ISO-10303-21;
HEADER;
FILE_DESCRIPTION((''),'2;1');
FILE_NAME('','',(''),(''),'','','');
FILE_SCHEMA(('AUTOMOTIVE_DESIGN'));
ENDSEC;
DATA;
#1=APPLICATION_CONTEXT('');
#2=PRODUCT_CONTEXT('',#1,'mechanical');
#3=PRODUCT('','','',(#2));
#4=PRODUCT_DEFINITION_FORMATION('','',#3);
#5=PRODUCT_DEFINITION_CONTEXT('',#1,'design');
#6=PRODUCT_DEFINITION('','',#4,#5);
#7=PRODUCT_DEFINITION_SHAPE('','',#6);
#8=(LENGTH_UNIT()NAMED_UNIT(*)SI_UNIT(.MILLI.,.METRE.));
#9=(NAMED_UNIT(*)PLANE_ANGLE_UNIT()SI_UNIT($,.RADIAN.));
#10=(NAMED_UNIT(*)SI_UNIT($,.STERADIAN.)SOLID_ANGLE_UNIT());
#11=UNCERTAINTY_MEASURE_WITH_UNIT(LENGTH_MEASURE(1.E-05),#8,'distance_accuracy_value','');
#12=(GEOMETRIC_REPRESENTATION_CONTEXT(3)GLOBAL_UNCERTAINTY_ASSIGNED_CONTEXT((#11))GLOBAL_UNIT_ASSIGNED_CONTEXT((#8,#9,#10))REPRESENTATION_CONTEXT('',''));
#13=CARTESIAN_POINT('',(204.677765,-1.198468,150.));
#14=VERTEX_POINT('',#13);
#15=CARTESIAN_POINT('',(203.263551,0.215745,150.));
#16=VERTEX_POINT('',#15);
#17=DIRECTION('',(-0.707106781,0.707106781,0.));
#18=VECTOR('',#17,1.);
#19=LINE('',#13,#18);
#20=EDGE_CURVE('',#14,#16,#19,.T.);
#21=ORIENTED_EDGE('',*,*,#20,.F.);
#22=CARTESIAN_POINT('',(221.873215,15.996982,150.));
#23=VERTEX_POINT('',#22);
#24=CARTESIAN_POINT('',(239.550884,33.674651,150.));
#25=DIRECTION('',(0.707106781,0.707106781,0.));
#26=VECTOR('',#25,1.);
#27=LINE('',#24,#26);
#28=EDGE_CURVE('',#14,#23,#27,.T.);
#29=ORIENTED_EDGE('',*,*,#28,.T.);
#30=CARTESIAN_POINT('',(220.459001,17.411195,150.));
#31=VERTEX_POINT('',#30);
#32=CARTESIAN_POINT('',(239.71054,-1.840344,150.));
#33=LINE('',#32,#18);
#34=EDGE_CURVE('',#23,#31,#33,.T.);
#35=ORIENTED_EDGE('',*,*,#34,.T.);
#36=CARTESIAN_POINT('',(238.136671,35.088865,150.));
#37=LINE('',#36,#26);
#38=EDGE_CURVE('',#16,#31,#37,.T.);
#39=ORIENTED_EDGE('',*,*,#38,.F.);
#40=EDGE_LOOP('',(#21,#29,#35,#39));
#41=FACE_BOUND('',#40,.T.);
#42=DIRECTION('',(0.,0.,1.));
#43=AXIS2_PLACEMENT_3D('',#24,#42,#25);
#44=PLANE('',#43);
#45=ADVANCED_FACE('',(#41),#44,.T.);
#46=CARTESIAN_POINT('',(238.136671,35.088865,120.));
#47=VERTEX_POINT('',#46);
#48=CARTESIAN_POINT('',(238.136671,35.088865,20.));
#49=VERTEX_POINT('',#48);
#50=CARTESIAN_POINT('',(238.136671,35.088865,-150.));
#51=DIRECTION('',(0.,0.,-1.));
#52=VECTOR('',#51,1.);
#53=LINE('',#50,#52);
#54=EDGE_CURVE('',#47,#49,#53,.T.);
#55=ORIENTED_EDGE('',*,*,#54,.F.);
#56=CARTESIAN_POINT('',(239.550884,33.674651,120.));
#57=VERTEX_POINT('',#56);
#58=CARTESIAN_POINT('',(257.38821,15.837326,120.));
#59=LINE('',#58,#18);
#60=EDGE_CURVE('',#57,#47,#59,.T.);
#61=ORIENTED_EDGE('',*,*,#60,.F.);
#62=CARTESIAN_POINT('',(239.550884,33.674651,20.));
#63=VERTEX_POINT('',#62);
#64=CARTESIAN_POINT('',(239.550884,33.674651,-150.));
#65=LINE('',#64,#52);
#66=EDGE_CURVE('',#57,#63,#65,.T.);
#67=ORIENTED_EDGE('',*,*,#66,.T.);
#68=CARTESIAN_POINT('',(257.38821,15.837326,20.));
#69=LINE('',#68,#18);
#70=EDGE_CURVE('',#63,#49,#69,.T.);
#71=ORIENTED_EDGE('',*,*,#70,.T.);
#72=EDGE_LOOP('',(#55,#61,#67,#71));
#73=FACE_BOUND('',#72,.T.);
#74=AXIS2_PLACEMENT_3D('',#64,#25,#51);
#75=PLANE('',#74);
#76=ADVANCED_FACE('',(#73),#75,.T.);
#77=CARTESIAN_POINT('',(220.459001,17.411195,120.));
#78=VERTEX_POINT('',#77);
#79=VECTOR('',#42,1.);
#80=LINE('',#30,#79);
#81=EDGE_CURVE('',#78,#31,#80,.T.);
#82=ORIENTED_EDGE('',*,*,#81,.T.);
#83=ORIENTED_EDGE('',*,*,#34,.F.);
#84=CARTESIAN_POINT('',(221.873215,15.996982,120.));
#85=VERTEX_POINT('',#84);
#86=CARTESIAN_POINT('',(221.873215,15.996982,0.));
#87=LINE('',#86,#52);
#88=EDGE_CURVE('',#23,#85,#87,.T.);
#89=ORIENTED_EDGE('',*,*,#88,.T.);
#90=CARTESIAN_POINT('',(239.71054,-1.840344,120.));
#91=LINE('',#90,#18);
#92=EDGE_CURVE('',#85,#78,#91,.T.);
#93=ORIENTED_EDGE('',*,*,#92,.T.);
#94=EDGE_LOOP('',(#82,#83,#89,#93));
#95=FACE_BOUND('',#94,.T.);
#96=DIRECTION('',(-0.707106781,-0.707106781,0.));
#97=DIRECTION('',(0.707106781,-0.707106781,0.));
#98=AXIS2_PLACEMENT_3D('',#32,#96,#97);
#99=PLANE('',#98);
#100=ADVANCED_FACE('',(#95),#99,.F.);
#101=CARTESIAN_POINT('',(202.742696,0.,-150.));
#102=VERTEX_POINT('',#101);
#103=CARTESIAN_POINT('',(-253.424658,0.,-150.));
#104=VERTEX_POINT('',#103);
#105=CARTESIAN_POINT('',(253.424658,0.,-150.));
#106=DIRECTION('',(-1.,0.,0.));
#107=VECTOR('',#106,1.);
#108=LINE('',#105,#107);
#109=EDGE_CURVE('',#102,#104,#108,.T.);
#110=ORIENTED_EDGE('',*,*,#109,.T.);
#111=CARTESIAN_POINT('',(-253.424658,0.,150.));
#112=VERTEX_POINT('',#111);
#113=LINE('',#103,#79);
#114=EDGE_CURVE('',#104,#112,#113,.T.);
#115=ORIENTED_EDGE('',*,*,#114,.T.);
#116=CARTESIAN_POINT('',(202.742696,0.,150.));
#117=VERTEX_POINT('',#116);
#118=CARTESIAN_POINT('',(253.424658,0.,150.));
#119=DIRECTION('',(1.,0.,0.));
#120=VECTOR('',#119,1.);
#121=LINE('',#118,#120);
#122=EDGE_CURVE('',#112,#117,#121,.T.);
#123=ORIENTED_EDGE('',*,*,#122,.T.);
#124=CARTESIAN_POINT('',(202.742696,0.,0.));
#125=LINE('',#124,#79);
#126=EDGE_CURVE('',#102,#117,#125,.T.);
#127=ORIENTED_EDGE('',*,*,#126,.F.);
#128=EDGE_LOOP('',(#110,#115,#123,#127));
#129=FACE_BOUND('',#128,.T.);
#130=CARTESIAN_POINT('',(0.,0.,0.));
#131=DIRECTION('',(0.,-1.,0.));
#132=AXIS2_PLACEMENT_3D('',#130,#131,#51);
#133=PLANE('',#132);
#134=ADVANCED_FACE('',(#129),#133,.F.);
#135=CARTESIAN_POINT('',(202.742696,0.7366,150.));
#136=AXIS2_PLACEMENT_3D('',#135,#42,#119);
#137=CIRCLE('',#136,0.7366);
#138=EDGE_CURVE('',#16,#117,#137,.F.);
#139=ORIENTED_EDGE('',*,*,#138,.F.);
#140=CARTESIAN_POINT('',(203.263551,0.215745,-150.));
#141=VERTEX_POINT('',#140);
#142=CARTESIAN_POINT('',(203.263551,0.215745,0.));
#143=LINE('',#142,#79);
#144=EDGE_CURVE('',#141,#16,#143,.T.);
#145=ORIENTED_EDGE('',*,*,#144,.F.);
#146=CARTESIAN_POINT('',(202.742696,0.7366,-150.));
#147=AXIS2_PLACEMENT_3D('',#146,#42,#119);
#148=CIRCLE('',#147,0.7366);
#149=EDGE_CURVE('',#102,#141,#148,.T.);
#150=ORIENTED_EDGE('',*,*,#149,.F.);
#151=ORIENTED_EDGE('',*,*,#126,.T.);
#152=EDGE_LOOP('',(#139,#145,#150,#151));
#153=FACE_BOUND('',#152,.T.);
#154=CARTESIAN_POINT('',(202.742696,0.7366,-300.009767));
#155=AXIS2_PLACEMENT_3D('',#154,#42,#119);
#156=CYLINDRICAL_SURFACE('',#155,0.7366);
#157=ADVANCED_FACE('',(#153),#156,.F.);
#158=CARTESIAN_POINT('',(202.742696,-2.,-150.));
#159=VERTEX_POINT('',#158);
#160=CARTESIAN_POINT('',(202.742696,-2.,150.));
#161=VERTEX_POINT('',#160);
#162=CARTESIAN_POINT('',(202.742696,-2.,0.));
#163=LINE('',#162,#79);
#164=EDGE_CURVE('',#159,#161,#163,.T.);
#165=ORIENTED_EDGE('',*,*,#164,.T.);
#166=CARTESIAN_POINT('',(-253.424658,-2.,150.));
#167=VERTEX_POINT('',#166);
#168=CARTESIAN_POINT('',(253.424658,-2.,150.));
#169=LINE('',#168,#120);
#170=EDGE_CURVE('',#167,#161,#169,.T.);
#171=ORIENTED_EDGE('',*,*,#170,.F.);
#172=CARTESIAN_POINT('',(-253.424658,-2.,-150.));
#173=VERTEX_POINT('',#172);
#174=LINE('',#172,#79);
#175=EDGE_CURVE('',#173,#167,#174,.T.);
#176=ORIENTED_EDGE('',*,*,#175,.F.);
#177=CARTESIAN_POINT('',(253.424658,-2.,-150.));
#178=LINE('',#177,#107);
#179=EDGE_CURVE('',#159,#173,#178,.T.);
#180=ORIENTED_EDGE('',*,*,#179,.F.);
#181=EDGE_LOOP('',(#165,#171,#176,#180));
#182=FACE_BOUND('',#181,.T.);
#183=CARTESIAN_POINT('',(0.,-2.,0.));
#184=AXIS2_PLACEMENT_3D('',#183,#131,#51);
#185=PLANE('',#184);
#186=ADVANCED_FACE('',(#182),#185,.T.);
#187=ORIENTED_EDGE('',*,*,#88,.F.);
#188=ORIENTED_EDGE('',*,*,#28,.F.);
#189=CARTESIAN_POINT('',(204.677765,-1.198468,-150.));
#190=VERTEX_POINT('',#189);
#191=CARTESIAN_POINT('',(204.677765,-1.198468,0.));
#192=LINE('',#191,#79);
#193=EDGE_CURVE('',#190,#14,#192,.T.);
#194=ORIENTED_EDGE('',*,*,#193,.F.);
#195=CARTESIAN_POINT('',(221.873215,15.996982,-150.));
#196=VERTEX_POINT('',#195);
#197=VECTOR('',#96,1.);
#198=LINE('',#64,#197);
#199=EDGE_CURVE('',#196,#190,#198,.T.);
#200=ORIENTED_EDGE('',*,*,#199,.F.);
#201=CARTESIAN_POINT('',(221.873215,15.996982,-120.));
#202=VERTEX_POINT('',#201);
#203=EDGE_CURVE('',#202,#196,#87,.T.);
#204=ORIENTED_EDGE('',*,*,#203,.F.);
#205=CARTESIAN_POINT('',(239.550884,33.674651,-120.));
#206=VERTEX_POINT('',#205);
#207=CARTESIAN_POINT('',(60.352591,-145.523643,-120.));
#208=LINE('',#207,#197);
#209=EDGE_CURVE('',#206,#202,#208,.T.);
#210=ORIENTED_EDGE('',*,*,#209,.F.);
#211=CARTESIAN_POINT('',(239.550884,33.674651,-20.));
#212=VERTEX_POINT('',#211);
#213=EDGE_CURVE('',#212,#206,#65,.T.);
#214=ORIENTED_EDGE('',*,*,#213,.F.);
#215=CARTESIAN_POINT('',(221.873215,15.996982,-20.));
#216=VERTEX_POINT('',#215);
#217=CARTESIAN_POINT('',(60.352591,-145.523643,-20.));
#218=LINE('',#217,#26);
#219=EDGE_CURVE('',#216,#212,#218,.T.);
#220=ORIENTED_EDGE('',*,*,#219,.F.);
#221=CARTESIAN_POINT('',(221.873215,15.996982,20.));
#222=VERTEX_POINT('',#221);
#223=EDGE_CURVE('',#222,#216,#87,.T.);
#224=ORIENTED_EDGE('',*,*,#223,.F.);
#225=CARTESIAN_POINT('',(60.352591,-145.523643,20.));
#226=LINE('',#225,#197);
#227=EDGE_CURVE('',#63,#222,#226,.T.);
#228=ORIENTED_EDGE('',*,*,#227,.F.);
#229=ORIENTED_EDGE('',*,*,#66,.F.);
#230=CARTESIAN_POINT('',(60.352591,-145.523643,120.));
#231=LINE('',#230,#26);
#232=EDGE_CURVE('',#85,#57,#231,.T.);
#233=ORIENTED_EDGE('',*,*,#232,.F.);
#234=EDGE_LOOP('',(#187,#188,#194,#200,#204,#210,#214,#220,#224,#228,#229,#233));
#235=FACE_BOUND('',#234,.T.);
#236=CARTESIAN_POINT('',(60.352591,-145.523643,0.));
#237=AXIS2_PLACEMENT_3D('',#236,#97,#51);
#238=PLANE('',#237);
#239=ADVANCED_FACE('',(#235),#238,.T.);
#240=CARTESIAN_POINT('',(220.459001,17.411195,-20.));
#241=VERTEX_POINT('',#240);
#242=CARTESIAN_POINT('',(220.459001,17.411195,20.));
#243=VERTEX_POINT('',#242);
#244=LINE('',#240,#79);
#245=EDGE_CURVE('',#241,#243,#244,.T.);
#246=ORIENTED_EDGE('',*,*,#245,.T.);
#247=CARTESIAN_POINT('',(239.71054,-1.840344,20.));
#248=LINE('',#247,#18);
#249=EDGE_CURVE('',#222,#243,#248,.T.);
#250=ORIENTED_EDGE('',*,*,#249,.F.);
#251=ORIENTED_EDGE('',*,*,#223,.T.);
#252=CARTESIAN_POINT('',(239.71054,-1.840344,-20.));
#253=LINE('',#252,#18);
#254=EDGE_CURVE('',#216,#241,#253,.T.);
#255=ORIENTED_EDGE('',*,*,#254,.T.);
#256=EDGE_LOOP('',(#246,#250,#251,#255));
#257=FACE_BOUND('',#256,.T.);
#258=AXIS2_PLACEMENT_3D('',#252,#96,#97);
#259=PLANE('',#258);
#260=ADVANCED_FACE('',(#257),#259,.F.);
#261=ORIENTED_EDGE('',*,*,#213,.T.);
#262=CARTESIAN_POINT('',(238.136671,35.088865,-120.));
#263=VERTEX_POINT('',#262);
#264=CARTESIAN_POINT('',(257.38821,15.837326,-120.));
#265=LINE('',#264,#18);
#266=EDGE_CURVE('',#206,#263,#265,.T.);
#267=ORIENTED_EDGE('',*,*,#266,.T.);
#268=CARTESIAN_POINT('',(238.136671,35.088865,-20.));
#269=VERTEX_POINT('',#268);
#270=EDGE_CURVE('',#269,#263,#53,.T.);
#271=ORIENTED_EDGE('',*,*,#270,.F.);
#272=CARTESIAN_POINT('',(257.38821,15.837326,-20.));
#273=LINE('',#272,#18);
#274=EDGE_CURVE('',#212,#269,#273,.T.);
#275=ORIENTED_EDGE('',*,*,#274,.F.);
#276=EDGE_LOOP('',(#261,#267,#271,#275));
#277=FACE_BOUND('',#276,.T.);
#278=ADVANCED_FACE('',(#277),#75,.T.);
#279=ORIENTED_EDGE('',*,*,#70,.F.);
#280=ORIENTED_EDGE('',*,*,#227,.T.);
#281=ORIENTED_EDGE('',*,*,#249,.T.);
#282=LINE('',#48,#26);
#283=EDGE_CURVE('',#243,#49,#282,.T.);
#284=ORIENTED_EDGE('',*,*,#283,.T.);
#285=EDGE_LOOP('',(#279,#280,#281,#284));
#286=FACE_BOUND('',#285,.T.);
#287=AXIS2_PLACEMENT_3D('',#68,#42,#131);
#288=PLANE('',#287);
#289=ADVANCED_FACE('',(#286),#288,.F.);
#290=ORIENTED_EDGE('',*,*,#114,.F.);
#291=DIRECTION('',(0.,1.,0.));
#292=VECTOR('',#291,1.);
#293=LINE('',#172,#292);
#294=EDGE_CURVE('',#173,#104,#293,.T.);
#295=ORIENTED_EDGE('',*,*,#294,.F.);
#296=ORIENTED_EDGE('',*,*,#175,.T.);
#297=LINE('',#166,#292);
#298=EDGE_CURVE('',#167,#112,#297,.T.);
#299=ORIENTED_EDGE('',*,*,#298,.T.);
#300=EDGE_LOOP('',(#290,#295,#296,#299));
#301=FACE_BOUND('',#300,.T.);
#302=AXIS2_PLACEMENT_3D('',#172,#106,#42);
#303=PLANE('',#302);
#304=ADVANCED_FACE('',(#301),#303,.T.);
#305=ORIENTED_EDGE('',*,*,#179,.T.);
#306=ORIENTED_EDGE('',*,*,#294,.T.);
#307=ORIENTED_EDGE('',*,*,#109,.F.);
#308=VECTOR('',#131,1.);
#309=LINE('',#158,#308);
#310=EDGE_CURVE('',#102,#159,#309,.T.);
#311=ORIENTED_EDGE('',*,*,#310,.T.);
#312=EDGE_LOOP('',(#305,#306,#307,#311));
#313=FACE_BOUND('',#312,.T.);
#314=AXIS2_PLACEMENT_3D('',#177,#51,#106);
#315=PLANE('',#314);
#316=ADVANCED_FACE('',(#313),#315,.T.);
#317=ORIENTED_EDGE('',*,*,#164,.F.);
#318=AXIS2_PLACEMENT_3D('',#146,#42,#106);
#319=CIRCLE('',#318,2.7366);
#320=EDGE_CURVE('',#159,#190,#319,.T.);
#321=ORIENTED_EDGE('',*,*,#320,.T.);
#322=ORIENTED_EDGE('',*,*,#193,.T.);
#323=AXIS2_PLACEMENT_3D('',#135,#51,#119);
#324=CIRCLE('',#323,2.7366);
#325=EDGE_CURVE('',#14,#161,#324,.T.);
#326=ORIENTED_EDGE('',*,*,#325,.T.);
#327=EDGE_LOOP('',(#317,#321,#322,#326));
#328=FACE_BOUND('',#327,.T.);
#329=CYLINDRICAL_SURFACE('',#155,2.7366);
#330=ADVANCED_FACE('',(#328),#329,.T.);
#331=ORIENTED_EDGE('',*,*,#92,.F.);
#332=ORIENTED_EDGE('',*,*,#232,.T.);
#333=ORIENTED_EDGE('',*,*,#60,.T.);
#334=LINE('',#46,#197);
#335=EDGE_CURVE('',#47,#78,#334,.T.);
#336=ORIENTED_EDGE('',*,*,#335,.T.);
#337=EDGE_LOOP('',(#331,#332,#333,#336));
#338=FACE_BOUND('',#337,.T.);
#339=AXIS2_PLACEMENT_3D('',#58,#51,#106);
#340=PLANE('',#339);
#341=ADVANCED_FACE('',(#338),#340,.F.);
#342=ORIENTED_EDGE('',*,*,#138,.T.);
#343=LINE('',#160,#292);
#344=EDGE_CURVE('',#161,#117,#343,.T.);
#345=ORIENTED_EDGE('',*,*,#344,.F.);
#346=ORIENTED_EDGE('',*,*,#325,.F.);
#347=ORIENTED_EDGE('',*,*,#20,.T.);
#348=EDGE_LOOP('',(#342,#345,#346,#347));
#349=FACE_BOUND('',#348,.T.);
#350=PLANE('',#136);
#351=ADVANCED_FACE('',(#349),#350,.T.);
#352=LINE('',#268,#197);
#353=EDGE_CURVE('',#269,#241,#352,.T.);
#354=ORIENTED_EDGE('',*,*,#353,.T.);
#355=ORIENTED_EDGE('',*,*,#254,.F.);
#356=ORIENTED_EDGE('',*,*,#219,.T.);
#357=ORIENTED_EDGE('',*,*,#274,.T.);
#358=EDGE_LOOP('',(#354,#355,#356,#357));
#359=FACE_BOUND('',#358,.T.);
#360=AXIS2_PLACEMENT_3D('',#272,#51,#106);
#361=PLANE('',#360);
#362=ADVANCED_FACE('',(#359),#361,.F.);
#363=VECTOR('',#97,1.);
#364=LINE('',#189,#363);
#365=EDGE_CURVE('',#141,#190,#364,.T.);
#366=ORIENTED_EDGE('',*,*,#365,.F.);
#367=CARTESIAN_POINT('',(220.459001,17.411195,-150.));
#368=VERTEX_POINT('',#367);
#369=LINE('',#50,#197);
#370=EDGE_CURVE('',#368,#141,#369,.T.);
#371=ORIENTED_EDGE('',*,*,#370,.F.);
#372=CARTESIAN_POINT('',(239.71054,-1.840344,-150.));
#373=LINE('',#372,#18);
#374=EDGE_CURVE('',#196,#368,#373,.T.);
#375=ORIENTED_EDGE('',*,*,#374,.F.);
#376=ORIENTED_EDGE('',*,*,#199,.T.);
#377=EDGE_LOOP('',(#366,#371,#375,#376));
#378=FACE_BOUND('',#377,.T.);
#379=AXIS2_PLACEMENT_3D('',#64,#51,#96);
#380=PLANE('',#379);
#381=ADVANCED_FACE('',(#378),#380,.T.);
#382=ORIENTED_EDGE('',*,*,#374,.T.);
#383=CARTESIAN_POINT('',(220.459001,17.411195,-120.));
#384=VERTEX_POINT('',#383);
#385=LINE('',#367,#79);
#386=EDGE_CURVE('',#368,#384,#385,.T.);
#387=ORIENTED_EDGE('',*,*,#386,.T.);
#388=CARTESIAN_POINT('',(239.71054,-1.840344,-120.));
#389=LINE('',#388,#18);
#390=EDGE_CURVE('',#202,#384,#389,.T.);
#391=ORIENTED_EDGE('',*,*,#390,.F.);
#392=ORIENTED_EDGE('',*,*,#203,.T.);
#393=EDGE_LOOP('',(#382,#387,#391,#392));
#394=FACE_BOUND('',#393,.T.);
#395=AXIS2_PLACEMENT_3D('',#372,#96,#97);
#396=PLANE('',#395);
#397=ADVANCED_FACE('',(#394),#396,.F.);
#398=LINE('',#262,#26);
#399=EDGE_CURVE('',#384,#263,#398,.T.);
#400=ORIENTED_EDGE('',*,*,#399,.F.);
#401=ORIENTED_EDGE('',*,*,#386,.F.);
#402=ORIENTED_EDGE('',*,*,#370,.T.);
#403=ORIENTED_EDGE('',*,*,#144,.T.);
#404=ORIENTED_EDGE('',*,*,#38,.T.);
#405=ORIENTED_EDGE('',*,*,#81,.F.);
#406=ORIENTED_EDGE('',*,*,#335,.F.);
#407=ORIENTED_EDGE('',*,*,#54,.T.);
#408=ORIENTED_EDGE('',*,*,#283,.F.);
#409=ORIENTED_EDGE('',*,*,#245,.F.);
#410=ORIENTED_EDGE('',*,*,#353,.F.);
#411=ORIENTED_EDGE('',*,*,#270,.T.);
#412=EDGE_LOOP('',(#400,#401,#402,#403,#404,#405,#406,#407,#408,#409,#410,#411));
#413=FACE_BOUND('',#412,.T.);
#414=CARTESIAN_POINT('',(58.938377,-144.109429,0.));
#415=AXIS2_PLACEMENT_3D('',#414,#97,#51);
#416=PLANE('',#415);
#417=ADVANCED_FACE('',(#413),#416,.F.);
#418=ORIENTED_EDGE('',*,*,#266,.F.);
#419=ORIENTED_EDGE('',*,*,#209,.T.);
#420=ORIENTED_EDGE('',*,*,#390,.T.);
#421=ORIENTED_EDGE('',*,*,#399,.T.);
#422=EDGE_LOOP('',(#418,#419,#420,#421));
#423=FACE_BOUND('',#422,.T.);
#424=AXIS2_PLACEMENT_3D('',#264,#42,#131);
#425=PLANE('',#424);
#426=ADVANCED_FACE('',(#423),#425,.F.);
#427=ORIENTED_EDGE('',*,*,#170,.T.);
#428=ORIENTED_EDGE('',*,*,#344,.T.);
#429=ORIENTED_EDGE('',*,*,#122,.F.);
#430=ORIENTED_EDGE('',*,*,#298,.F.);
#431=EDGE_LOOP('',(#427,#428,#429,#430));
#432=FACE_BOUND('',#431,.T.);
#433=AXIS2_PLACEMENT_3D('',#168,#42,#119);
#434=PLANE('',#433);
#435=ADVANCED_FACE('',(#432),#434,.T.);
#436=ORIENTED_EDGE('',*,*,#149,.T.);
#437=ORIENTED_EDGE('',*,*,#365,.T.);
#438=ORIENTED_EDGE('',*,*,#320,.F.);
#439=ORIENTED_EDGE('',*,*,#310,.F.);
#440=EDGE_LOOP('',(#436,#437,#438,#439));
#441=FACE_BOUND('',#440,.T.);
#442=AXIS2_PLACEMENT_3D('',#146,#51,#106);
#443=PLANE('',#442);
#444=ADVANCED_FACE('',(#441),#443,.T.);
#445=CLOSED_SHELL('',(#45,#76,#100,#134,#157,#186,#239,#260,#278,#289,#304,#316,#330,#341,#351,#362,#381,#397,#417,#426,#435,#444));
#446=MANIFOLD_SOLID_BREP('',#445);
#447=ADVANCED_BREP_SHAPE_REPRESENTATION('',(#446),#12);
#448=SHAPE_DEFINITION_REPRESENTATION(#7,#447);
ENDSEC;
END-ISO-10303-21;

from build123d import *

# Parameters (mm, degrees)
ESBO_O1_W               = 506.849315068
ESBO_O1_H               = 300
FLANGE_BASE1_DEPTH      = 2
DOBRA_START             = -150
DOBRA_ESBO_ADA1_DEPTH   = 300
DOBRA_ESBO_ADA1_2_DEPTH = 300
ESBO_O7_W               = 25
ESBO_O7_H               = 30
ESBO_O7_H_2             = 40
CORTE_EXTRUS_O1_DEPTH   = 409.841691807


# Read off the part's stored shape, not the designer's step: Dobra esboçada1
# Sheet-metal steps are written as plain solids
with BuildPart() as part:
    # Esboço1 → Flange-base1 (new body)
    with BuildSketch(Plane(origin=(0, 0, 0), x_dir=(1, 0, 0), z_dir=(0, 1, 0))):
        Rectangle(ESBO_O1_W, ESBO_O1_H)
    extrude(amount=-FLANGE_BASE1_DEPTH)

    # Dobra esboçada1 outline → Dobra esboçada1 (cut)
    with BuildSketch(Plane.XY.offset(DOBRA_START)):
        with BuildLine():
            Line((253.424657534, 0), (205.876233143, 0))
            Line((205.876233143, 0), (204.677764726, -1.198468417))
            ThreePointArc((204.677764726, -1.198468417), (203.78994779, -1.791688729), (202.742696309, -2))
            Line((202.742696309, -2), (253.424657534, -2))
            Line((253.424657534, -2), (253.424657534, 0))
        make_face()
    extrude(amount=DOBRA_ESBO_ADA1_DEPTH, mode=Mode.SUBTRACT)

    # Dobra esbo_ada1 2 outline → Dobra esbo_ada1 2 (add)
    with BuildSketch(Plane.XY.offset(DOBRA_START)):
        with BuildLine():
            Line((238.136670816, 35.088864797), (203.263551164, 0.215745145))
            ThreePointArc((203.263551164, 0.215745145), (203.024580925, 0.056070336), (202.742696309, 0))
            Line((202.742696309, 0), (205.876233143, 0))
            Line((205.876233143, 0), (239.550884379, 33.674651235))
            Line((239.550884379, 33.674651235), (238.136670816, 35.088864797))
        make_face()
    extrude(amount=DOBRA_ESBO_ADA1_2_DEPTH)

    # Esboço7 → Corte-extrusão1 (cut, through all)
    with BuildSketch(Plane(origin=(101.52390301, -101.52390301, 0), x_dir=(0.7071067811865464, 0.7071067811865488, 0), z_dir=(-0.7071067811865488, 0.7071067811865464, 0))):
        with Locations((180.699629026, 135)):
            Rectangle(ESBO_O7_W, ESBO_O7_H)
        with Locations((180.699629026, 0)):
            Rectangle(ESBO_O7_W, ESBO_O7_H_2)
        with Locations((180.699629026, -135)):
            Rectangle(ESBO_O7_W, ESBO_O7_H)
    extrude(amount=-CORTE_EXTRUS_O1_DEPTH, mode=Mode.SUBTRACT)


solid = part.part
